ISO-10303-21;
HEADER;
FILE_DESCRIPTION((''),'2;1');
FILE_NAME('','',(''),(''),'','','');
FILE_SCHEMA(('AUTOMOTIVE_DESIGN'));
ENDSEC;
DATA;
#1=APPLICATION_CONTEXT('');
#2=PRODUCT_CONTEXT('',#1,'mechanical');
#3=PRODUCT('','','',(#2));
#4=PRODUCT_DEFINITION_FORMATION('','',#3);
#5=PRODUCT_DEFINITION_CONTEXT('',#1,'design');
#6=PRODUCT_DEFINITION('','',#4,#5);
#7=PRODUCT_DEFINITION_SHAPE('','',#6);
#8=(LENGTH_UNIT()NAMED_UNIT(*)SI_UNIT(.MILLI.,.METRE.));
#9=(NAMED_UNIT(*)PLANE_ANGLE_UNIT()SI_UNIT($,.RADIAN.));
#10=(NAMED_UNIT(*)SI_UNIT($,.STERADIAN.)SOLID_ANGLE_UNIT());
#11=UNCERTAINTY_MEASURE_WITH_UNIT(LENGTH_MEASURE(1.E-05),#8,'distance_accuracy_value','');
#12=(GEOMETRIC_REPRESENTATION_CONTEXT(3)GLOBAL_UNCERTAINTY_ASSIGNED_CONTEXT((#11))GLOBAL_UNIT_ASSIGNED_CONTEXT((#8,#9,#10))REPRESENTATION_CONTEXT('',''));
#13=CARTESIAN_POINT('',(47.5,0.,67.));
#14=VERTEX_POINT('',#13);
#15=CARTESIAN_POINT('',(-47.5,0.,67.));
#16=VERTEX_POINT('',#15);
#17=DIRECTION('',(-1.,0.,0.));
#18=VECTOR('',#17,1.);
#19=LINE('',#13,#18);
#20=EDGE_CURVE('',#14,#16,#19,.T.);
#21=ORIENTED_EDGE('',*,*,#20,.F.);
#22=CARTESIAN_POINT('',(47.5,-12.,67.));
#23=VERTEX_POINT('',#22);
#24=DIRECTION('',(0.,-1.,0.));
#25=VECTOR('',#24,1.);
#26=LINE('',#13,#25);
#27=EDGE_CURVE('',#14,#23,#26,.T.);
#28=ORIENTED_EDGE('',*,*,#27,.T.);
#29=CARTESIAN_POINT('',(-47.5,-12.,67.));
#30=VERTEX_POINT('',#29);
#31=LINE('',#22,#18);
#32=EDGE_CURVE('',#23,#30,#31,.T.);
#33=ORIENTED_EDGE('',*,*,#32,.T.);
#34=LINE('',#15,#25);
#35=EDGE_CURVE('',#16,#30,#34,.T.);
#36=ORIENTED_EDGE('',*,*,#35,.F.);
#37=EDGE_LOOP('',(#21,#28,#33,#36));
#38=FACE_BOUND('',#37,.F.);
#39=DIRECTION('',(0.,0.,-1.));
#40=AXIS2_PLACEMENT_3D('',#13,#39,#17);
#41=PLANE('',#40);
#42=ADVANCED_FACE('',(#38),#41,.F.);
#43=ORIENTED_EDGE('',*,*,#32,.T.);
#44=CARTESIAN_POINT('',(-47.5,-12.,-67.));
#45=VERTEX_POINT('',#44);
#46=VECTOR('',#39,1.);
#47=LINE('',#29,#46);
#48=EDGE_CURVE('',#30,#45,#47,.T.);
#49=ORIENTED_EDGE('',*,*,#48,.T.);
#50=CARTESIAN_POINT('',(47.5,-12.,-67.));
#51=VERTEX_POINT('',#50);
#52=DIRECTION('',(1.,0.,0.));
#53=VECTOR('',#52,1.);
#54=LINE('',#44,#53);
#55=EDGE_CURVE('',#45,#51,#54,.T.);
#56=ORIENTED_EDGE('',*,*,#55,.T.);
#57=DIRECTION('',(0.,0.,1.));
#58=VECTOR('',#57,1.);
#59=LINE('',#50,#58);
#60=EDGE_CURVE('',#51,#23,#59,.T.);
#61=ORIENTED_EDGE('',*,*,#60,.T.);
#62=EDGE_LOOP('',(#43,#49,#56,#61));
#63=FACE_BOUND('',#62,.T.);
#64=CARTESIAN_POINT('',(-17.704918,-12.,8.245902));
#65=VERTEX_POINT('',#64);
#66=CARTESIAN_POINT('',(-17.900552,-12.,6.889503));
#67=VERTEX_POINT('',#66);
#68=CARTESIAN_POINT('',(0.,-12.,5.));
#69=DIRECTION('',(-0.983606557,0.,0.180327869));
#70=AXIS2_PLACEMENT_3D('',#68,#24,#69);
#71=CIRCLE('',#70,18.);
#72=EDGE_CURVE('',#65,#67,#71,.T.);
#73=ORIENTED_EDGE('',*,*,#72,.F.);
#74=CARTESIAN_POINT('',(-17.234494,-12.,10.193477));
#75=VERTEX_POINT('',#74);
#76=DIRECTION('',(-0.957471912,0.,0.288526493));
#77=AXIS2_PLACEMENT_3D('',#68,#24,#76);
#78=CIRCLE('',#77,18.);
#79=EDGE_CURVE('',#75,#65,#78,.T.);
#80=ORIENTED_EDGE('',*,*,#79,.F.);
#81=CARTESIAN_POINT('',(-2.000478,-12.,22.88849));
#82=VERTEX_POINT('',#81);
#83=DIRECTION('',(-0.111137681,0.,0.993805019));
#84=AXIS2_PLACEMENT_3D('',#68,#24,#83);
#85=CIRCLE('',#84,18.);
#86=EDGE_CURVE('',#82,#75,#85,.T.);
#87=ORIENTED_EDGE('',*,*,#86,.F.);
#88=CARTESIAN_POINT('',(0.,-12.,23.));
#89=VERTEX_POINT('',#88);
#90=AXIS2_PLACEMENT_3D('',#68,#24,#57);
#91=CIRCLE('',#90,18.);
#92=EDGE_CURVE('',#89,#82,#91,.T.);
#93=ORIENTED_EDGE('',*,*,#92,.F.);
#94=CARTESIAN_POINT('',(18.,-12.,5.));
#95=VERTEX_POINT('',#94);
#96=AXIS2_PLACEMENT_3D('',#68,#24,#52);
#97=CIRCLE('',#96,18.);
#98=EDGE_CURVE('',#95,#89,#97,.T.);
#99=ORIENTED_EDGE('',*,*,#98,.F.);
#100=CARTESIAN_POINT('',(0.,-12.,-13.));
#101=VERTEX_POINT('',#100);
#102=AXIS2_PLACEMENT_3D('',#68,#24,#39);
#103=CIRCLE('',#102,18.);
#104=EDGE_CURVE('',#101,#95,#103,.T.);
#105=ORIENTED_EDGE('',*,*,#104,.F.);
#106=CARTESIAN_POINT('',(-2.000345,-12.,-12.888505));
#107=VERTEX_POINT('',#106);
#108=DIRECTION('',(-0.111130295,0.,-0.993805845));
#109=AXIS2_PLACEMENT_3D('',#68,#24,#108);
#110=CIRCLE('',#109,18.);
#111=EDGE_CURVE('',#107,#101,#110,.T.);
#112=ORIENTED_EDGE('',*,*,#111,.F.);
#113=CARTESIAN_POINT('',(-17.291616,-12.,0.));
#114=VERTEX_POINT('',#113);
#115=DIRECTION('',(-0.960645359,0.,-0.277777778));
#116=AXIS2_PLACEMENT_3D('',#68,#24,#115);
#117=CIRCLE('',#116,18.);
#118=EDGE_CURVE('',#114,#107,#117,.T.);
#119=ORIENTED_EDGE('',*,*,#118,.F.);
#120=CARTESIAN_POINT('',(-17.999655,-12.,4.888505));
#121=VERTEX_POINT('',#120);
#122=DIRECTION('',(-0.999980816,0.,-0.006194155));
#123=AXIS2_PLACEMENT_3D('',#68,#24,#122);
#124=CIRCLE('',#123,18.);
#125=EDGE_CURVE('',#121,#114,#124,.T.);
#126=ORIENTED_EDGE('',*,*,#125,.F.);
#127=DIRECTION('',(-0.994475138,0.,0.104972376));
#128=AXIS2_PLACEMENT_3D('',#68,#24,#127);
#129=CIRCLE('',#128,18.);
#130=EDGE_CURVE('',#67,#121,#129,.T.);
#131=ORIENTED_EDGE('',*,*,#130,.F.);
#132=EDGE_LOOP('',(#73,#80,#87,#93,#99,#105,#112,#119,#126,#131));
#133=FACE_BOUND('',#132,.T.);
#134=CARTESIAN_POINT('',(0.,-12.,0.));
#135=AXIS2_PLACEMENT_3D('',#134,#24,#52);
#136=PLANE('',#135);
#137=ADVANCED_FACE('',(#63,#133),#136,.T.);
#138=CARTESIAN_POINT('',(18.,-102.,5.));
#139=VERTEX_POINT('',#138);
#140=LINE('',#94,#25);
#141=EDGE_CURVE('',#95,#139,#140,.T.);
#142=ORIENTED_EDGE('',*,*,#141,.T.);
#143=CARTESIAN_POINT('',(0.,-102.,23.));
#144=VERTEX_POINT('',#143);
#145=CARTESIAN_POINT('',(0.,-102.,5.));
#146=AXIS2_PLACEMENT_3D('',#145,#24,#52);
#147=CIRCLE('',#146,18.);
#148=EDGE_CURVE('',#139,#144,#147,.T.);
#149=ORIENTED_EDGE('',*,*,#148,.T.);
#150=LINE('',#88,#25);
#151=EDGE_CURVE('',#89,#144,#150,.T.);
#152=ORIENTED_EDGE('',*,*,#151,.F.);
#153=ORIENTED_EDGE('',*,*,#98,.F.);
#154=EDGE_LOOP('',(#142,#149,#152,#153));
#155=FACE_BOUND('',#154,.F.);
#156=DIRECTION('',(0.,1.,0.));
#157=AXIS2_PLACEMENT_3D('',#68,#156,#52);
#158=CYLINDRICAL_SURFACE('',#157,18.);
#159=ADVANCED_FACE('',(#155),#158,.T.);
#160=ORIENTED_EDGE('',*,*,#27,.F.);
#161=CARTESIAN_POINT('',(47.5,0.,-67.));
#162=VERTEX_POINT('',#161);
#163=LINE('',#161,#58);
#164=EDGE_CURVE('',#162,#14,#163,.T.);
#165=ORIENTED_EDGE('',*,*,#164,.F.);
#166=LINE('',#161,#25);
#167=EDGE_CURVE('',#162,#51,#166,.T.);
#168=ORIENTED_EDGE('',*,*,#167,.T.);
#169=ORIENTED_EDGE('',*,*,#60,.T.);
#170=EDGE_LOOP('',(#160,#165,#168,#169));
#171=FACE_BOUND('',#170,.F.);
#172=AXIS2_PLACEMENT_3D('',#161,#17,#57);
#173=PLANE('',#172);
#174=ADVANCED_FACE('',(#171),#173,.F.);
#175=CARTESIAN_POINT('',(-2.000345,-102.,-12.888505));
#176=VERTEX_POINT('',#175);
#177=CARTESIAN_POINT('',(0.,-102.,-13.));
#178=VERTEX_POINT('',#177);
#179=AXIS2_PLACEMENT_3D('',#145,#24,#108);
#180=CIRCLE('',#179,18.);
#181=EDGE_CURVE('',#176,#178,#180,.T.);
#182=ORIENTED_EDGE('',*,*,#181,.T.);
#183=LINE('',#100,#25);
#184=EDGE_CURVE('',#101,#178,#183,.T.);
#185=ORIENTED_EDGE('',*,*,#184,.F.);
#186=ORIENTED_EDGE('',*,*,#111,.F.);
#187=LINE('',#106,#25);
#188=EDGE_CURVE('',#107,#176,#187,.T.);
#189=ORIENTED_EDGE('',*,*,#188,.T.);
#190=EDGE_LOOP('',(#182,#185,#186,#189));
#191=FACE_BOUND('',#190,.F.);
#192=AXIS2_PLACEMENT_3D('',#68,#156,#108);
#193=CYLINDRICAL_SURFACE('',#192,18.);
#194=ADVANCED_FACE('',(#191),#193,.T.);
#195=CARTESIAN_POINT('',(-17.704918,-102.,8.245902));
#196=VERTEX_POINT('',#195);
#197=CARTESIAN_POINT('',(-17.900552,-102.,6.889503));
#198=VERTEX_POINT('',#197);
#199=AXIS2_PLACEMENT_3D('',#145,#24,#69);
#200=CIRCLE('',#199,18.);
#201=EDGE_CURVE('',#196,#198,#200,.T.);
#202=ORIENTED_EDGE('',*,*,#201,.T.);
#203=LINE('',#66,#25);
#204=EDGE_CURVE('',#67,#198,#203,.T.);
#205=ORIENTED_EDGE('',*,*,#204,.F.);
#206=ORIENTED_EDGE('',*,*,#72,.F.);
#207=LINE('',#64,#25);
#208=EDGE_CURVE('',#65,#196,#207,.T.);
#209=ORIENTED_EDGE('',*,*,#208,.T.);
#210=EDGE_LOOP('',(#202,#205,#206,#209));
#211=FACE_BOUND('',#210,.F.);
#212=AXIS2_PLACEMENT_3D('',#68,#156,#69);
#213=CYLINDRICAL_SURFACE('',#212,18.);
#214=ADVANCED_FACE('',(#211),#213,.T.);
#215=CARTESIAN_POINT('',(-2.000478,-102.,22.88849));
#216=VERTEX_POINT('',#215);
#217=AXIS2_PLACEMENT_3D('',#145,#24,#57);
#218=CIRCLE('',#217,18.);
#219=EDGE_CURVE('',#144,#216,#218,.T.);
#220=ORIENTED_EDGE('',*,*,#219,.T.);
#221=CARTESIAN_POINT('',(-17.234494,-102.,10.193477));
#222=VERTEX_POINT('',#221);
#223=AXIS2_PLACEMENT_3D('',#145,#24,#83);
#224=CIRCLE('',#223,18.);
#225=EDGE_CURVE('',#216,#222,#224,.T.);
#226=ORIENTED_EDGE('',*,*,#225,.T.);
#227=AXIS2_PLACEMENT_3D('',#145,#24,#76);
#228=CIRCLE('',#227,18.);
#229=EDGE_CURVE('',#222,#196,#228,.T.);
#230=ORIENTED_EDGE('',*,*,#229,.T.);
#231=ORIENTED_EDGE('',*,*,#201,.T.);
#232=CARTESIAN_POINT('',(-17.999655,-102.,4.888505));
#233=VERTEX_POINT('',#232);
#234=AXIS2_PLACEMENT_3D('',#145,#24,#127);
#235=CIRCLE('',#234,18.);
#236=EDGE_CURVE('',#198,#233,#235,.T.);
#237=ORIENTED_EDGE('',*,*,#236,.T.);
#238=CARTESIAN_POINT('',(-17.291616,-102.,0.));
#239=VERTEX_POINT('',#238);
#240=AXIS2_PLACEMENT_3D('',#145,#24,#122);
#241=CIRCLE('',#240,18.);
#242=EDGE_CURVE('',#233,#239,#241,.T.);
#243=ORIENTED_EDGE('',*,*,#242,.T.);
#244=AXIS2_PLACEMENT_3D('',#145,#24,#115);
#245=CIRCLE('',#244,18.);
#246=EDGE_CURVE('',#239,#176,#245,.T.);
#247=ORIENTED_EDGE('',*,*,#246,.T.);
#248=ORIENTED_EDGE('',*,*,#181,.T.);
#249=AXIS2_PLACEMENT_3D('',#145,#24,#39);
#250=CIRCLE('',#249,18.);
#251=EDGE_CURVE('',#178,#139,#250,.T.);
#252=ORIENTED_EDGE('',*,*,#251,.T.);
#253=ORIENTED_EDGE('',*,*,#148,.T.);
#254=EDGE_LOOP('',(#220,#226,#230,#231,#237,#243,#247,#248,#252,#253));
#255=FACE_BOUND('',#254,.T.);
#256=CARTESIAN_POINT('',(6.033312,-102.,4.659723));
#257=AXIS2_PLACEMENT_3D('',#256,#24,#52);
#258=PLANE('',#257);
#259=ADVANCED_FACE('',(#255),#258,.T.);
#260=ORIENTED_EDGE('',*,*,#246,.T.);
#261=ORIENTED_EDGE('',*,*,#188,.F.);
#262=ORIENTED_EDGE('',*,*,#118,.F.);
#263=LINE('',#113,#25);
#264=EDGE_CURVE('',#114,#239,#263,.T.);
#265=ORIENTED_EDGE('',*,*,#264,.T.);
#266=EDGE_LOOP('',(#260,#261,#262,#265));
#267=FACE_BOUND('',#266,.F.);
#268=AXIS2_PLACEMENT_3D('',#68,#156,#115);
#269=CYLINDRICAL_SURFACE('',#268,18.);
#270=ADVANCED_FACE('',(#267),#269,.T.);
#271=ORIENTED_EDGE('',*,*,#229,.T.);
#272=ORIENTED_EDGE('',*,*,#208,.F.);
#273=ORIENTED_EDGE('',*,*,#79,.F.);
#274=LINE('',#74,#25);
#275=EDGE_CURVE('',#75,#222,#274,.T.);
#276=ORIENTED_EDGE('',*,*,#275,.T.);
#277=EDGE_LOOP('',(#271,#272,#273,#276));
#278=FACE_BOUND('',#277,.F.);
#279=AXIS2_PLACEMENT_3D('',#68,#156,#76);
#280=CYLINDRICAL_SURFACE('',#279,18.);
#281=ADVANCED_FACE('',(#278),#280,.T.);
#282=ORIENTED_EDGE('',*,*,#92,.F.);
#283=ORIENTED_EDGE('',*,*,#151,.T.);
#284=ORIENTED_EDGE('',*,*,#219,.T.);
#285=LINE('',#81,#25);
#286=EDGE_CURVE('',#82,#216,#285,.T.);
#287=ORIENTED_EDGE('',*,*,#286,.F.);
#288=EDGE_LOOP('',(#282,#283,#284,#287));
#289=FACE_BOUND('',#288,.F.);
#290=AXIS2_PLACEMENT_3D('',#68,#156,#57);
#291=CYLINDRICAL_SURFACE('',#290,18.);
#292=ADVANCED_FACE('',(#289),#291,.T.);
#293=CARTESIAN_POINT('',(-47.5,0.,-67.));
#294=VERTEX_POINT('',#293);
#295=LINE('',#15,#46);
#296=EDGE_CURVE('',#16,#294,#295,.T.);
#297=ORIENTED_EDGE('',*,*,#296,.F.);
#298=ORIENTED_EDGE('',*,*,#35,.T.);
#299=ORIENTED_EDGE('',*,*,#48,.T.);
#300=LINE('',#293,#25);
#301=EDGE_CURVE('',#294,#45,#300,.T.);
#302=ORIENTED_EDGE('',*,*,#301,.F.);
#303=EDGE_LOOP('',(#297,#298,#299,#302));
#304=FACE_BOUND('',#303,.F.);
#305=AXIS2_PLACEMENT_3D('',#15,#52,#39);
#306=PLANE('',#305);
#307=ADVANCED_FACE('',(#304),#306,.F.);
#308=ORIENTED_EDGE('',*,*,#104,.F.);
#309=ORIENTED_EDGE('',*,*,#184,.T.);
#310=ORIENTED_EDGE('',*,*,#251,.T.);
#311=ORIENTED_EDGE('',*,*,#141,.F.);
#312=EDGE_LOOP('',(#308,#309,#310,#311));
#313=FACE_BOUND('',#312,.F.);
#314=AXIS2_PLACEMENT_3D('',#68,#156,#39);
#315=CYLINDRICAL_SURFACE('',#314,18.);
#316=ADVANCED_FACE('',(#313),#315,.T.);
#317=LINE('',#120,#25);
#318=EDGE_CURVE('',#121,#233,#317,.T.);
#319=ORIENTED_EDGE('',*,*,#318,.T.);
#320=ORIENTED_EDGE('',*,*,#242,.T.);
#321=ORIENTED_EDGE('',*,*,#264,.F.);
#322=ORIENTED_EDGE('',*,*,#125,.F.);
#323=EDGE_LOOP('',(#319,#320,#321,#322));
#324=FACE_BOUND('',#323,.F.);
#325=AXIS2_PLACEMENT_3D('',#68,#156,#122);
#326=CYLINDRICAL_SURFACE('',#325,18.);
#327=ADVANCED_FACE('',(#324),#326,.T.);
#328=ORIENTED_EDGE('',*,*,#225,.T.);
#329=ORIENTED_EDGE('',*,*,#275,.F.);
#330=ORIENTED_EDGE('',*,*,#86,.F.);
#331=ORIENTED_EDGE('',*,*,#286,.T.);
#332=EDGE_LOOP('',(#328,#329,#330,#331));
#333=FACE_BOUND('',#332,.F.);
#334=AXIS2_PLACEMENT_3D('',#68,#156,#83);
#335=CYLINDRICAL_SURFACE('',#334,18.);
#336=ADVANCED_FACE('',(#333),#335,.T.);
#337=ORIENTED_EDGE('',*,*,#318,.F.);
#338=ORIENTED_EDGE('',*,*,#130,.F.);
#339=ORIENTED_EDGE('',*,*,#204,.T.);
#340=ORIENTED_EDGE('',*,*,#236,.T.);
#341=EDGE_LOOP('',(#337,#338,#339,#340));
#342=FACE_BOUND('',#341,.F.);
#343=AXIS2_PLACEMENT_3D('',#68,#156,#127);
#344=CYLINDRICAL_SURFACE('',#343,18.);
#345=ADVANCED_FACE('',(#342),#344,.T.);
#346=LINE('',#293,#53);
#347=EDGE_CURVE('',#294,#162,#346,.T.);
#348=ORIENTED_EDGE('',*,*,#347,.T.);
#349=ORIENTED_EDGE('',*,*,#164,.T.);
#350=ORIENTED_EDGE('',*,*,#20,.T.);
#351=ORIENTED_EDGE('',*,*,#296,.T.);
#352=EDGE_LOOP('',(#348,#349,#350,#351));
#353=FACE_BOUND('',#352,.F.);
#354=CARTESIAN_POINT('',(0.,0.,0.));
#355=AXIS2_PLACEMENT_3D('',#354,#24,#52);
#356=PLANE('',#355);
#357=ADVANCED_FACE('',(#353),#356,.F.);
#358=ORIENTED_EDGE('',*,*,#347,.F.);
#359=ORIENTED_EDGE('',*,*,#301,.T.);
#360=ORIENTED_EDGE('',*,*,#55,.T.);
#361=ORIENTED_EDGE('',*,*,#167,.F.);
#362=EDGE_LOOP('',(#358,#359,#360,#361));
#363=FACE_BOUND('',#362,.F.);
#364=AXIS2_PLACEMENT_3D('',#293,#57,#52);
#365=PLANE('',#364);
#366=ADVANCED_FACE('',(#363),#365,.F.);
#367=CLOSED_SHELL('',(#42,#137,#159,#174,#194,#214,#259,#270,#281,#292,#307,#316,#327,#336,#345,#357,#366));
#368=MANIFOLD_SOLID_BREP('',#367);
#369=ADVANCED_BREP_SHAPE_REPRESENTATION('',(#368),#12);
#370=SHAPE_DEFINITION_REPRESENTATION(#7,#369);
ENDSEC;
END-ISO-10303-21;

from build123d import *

# Parameters (mm, degrees)
F1_DEPTH = 12
F3_DEPTH = 90


with BuildPart() as f1:
    # F0 (on Front) → F1 (new body)
    with BuildSketch(Plane.XZ):
        Polygon((47.5, -67), (47.5, 0), (47.5, 67), (0, 67), (-47.5, 67), (-47.5, -67), align=None)
    extrude(amount=F1_DEPTH)

    # F2 (on face) → F3 (join)
    with BuildSketch(Plane.XZ.offset(12)):
        with BuildLine():
            Line((0, 5), (0, 0))
            Line((0, 0), (-4.8013158464, 0))
            ThreePointArc((-4.8013158464, 0), (-1.2386876382, -6.0708472044), (0, -13))
            ThreePointArc((0, -13), (12.7279220614, -7.7279220614), (18, 5))
            ThreePointArc((18, 5), (12.7279220614, 17.7279220614), (0, 23))
            Line((0, 23), (0, 5))
        make_face()
        with BuildLine():
            Line((-4.8013158464, 0), (0, 0))
            Line((0, 0), (0, 5))
            Line((0, 5), (0, 23))
            ThreePointArc((0, 23), (-5.397234005, 11.476680806), (-17.7049180328, 8.2459016393))
            ThreePointArc((-17.7049180328, 8.2459016393), (-17.8156486606, 7.5695647107), (-17.9005524862, 6.8895027624))
            ThreePointArc((-17.9005524862, 6.8895027624), (-10.6901851858, 4.7010550004), (-4.8013158464, 0))
        make_face()
        with BuildLine():
            ThreePointArc((0, -13), (-1.2386876382, -6.0708472044), (-4.8013158464, 0))
            Line((-4.8013158464, 0), (-7.550100402, 0))
            ThreePointArc((-7.550100402, 0), (-3.4675400893, -5.881167982), (-2.0003453113, -12.8885052096))
            ThreePointArc((-2.0003453113, -12.8885052096), (-1.0017250687, -12.9721046872), (0, -13))
        make_face()
        with BuildLine():
            Line((-7.550100402, 0), (-4.8013158464, 0))
            ThreePointArc((-4.8013158464, 0), (-10.6901851858, 4.7010550004), (-17.9005524862, 6.8895027624))
            ThreePointArc((-17.9005524862, 6.8895027624), (-17.9779647514, 5.8903838491), (-17.9996546887, 4.8885052096))
            ThreePointArc((-17.9996546887, 4.8885052096), (-12.3726305137, 3.3040864423), (-7.550100402, 0))
        make_face()
        with BuildLine():
            ThreePointArc((-2.0003453113, -12.8885052096), (-3.4675400893, -5.881167982), (-7.550100402, 0))
            Line((-7.550100402, 0), (-17.2916164658, 0))
            ThreePointArc((-17.2916164658, 0), (-11.6005749399, -8.76323585), (-2.0003453113, -12.8885052096))
        make_face()
        with BuildLine():
            Line((-17.2916164658, 0), (-7.550100402, 0))
            ThreePointArc((-7.550100402, 0), (-12.3726305137, 3.3040864423), (-17.9996546887, 4.8885052096))
            ThreePointArc((-17.9996546887, 4.8885052096), (-17.8141187186, 2.4198499502), (-17.2916164658, 0))
        make_face()
        with BuildLine():
            ThreePointArc((-17.7049180328, 8.2459016393), (-5.397234005, 11.476680806), (0, 23))
            ThreePointArc((0, 23), (-1.0017918512, 22.9721009647), (-2.0004782551, 22.888490343))
            ThreePointArc((-2.0004782551, 22.888490343), (-6.6776028044, 13.0131233652), (-17.2344944225, 10.1934768701))
            ThreePointArc((-17.2344944225, 10.1934768701), (-17.4968253692, 9.2262396998), (-17.7049180328, 8.2459016393))
        make_face()
        with BuildLine():
            ThreePointArc((-17.2344944225, 10.1934768701), (-6.6776028044, 13.0131233652), (-2.0004782551, 22.888490343))
            ThreePointArc((-2.0004782551, 22.888490343), (-11.523319194, 18.8279830328), (-17.2344944225, 10.1934768701))
        make_face()
    extrude(amount=F3_DEPTH)


solid = f1.part
